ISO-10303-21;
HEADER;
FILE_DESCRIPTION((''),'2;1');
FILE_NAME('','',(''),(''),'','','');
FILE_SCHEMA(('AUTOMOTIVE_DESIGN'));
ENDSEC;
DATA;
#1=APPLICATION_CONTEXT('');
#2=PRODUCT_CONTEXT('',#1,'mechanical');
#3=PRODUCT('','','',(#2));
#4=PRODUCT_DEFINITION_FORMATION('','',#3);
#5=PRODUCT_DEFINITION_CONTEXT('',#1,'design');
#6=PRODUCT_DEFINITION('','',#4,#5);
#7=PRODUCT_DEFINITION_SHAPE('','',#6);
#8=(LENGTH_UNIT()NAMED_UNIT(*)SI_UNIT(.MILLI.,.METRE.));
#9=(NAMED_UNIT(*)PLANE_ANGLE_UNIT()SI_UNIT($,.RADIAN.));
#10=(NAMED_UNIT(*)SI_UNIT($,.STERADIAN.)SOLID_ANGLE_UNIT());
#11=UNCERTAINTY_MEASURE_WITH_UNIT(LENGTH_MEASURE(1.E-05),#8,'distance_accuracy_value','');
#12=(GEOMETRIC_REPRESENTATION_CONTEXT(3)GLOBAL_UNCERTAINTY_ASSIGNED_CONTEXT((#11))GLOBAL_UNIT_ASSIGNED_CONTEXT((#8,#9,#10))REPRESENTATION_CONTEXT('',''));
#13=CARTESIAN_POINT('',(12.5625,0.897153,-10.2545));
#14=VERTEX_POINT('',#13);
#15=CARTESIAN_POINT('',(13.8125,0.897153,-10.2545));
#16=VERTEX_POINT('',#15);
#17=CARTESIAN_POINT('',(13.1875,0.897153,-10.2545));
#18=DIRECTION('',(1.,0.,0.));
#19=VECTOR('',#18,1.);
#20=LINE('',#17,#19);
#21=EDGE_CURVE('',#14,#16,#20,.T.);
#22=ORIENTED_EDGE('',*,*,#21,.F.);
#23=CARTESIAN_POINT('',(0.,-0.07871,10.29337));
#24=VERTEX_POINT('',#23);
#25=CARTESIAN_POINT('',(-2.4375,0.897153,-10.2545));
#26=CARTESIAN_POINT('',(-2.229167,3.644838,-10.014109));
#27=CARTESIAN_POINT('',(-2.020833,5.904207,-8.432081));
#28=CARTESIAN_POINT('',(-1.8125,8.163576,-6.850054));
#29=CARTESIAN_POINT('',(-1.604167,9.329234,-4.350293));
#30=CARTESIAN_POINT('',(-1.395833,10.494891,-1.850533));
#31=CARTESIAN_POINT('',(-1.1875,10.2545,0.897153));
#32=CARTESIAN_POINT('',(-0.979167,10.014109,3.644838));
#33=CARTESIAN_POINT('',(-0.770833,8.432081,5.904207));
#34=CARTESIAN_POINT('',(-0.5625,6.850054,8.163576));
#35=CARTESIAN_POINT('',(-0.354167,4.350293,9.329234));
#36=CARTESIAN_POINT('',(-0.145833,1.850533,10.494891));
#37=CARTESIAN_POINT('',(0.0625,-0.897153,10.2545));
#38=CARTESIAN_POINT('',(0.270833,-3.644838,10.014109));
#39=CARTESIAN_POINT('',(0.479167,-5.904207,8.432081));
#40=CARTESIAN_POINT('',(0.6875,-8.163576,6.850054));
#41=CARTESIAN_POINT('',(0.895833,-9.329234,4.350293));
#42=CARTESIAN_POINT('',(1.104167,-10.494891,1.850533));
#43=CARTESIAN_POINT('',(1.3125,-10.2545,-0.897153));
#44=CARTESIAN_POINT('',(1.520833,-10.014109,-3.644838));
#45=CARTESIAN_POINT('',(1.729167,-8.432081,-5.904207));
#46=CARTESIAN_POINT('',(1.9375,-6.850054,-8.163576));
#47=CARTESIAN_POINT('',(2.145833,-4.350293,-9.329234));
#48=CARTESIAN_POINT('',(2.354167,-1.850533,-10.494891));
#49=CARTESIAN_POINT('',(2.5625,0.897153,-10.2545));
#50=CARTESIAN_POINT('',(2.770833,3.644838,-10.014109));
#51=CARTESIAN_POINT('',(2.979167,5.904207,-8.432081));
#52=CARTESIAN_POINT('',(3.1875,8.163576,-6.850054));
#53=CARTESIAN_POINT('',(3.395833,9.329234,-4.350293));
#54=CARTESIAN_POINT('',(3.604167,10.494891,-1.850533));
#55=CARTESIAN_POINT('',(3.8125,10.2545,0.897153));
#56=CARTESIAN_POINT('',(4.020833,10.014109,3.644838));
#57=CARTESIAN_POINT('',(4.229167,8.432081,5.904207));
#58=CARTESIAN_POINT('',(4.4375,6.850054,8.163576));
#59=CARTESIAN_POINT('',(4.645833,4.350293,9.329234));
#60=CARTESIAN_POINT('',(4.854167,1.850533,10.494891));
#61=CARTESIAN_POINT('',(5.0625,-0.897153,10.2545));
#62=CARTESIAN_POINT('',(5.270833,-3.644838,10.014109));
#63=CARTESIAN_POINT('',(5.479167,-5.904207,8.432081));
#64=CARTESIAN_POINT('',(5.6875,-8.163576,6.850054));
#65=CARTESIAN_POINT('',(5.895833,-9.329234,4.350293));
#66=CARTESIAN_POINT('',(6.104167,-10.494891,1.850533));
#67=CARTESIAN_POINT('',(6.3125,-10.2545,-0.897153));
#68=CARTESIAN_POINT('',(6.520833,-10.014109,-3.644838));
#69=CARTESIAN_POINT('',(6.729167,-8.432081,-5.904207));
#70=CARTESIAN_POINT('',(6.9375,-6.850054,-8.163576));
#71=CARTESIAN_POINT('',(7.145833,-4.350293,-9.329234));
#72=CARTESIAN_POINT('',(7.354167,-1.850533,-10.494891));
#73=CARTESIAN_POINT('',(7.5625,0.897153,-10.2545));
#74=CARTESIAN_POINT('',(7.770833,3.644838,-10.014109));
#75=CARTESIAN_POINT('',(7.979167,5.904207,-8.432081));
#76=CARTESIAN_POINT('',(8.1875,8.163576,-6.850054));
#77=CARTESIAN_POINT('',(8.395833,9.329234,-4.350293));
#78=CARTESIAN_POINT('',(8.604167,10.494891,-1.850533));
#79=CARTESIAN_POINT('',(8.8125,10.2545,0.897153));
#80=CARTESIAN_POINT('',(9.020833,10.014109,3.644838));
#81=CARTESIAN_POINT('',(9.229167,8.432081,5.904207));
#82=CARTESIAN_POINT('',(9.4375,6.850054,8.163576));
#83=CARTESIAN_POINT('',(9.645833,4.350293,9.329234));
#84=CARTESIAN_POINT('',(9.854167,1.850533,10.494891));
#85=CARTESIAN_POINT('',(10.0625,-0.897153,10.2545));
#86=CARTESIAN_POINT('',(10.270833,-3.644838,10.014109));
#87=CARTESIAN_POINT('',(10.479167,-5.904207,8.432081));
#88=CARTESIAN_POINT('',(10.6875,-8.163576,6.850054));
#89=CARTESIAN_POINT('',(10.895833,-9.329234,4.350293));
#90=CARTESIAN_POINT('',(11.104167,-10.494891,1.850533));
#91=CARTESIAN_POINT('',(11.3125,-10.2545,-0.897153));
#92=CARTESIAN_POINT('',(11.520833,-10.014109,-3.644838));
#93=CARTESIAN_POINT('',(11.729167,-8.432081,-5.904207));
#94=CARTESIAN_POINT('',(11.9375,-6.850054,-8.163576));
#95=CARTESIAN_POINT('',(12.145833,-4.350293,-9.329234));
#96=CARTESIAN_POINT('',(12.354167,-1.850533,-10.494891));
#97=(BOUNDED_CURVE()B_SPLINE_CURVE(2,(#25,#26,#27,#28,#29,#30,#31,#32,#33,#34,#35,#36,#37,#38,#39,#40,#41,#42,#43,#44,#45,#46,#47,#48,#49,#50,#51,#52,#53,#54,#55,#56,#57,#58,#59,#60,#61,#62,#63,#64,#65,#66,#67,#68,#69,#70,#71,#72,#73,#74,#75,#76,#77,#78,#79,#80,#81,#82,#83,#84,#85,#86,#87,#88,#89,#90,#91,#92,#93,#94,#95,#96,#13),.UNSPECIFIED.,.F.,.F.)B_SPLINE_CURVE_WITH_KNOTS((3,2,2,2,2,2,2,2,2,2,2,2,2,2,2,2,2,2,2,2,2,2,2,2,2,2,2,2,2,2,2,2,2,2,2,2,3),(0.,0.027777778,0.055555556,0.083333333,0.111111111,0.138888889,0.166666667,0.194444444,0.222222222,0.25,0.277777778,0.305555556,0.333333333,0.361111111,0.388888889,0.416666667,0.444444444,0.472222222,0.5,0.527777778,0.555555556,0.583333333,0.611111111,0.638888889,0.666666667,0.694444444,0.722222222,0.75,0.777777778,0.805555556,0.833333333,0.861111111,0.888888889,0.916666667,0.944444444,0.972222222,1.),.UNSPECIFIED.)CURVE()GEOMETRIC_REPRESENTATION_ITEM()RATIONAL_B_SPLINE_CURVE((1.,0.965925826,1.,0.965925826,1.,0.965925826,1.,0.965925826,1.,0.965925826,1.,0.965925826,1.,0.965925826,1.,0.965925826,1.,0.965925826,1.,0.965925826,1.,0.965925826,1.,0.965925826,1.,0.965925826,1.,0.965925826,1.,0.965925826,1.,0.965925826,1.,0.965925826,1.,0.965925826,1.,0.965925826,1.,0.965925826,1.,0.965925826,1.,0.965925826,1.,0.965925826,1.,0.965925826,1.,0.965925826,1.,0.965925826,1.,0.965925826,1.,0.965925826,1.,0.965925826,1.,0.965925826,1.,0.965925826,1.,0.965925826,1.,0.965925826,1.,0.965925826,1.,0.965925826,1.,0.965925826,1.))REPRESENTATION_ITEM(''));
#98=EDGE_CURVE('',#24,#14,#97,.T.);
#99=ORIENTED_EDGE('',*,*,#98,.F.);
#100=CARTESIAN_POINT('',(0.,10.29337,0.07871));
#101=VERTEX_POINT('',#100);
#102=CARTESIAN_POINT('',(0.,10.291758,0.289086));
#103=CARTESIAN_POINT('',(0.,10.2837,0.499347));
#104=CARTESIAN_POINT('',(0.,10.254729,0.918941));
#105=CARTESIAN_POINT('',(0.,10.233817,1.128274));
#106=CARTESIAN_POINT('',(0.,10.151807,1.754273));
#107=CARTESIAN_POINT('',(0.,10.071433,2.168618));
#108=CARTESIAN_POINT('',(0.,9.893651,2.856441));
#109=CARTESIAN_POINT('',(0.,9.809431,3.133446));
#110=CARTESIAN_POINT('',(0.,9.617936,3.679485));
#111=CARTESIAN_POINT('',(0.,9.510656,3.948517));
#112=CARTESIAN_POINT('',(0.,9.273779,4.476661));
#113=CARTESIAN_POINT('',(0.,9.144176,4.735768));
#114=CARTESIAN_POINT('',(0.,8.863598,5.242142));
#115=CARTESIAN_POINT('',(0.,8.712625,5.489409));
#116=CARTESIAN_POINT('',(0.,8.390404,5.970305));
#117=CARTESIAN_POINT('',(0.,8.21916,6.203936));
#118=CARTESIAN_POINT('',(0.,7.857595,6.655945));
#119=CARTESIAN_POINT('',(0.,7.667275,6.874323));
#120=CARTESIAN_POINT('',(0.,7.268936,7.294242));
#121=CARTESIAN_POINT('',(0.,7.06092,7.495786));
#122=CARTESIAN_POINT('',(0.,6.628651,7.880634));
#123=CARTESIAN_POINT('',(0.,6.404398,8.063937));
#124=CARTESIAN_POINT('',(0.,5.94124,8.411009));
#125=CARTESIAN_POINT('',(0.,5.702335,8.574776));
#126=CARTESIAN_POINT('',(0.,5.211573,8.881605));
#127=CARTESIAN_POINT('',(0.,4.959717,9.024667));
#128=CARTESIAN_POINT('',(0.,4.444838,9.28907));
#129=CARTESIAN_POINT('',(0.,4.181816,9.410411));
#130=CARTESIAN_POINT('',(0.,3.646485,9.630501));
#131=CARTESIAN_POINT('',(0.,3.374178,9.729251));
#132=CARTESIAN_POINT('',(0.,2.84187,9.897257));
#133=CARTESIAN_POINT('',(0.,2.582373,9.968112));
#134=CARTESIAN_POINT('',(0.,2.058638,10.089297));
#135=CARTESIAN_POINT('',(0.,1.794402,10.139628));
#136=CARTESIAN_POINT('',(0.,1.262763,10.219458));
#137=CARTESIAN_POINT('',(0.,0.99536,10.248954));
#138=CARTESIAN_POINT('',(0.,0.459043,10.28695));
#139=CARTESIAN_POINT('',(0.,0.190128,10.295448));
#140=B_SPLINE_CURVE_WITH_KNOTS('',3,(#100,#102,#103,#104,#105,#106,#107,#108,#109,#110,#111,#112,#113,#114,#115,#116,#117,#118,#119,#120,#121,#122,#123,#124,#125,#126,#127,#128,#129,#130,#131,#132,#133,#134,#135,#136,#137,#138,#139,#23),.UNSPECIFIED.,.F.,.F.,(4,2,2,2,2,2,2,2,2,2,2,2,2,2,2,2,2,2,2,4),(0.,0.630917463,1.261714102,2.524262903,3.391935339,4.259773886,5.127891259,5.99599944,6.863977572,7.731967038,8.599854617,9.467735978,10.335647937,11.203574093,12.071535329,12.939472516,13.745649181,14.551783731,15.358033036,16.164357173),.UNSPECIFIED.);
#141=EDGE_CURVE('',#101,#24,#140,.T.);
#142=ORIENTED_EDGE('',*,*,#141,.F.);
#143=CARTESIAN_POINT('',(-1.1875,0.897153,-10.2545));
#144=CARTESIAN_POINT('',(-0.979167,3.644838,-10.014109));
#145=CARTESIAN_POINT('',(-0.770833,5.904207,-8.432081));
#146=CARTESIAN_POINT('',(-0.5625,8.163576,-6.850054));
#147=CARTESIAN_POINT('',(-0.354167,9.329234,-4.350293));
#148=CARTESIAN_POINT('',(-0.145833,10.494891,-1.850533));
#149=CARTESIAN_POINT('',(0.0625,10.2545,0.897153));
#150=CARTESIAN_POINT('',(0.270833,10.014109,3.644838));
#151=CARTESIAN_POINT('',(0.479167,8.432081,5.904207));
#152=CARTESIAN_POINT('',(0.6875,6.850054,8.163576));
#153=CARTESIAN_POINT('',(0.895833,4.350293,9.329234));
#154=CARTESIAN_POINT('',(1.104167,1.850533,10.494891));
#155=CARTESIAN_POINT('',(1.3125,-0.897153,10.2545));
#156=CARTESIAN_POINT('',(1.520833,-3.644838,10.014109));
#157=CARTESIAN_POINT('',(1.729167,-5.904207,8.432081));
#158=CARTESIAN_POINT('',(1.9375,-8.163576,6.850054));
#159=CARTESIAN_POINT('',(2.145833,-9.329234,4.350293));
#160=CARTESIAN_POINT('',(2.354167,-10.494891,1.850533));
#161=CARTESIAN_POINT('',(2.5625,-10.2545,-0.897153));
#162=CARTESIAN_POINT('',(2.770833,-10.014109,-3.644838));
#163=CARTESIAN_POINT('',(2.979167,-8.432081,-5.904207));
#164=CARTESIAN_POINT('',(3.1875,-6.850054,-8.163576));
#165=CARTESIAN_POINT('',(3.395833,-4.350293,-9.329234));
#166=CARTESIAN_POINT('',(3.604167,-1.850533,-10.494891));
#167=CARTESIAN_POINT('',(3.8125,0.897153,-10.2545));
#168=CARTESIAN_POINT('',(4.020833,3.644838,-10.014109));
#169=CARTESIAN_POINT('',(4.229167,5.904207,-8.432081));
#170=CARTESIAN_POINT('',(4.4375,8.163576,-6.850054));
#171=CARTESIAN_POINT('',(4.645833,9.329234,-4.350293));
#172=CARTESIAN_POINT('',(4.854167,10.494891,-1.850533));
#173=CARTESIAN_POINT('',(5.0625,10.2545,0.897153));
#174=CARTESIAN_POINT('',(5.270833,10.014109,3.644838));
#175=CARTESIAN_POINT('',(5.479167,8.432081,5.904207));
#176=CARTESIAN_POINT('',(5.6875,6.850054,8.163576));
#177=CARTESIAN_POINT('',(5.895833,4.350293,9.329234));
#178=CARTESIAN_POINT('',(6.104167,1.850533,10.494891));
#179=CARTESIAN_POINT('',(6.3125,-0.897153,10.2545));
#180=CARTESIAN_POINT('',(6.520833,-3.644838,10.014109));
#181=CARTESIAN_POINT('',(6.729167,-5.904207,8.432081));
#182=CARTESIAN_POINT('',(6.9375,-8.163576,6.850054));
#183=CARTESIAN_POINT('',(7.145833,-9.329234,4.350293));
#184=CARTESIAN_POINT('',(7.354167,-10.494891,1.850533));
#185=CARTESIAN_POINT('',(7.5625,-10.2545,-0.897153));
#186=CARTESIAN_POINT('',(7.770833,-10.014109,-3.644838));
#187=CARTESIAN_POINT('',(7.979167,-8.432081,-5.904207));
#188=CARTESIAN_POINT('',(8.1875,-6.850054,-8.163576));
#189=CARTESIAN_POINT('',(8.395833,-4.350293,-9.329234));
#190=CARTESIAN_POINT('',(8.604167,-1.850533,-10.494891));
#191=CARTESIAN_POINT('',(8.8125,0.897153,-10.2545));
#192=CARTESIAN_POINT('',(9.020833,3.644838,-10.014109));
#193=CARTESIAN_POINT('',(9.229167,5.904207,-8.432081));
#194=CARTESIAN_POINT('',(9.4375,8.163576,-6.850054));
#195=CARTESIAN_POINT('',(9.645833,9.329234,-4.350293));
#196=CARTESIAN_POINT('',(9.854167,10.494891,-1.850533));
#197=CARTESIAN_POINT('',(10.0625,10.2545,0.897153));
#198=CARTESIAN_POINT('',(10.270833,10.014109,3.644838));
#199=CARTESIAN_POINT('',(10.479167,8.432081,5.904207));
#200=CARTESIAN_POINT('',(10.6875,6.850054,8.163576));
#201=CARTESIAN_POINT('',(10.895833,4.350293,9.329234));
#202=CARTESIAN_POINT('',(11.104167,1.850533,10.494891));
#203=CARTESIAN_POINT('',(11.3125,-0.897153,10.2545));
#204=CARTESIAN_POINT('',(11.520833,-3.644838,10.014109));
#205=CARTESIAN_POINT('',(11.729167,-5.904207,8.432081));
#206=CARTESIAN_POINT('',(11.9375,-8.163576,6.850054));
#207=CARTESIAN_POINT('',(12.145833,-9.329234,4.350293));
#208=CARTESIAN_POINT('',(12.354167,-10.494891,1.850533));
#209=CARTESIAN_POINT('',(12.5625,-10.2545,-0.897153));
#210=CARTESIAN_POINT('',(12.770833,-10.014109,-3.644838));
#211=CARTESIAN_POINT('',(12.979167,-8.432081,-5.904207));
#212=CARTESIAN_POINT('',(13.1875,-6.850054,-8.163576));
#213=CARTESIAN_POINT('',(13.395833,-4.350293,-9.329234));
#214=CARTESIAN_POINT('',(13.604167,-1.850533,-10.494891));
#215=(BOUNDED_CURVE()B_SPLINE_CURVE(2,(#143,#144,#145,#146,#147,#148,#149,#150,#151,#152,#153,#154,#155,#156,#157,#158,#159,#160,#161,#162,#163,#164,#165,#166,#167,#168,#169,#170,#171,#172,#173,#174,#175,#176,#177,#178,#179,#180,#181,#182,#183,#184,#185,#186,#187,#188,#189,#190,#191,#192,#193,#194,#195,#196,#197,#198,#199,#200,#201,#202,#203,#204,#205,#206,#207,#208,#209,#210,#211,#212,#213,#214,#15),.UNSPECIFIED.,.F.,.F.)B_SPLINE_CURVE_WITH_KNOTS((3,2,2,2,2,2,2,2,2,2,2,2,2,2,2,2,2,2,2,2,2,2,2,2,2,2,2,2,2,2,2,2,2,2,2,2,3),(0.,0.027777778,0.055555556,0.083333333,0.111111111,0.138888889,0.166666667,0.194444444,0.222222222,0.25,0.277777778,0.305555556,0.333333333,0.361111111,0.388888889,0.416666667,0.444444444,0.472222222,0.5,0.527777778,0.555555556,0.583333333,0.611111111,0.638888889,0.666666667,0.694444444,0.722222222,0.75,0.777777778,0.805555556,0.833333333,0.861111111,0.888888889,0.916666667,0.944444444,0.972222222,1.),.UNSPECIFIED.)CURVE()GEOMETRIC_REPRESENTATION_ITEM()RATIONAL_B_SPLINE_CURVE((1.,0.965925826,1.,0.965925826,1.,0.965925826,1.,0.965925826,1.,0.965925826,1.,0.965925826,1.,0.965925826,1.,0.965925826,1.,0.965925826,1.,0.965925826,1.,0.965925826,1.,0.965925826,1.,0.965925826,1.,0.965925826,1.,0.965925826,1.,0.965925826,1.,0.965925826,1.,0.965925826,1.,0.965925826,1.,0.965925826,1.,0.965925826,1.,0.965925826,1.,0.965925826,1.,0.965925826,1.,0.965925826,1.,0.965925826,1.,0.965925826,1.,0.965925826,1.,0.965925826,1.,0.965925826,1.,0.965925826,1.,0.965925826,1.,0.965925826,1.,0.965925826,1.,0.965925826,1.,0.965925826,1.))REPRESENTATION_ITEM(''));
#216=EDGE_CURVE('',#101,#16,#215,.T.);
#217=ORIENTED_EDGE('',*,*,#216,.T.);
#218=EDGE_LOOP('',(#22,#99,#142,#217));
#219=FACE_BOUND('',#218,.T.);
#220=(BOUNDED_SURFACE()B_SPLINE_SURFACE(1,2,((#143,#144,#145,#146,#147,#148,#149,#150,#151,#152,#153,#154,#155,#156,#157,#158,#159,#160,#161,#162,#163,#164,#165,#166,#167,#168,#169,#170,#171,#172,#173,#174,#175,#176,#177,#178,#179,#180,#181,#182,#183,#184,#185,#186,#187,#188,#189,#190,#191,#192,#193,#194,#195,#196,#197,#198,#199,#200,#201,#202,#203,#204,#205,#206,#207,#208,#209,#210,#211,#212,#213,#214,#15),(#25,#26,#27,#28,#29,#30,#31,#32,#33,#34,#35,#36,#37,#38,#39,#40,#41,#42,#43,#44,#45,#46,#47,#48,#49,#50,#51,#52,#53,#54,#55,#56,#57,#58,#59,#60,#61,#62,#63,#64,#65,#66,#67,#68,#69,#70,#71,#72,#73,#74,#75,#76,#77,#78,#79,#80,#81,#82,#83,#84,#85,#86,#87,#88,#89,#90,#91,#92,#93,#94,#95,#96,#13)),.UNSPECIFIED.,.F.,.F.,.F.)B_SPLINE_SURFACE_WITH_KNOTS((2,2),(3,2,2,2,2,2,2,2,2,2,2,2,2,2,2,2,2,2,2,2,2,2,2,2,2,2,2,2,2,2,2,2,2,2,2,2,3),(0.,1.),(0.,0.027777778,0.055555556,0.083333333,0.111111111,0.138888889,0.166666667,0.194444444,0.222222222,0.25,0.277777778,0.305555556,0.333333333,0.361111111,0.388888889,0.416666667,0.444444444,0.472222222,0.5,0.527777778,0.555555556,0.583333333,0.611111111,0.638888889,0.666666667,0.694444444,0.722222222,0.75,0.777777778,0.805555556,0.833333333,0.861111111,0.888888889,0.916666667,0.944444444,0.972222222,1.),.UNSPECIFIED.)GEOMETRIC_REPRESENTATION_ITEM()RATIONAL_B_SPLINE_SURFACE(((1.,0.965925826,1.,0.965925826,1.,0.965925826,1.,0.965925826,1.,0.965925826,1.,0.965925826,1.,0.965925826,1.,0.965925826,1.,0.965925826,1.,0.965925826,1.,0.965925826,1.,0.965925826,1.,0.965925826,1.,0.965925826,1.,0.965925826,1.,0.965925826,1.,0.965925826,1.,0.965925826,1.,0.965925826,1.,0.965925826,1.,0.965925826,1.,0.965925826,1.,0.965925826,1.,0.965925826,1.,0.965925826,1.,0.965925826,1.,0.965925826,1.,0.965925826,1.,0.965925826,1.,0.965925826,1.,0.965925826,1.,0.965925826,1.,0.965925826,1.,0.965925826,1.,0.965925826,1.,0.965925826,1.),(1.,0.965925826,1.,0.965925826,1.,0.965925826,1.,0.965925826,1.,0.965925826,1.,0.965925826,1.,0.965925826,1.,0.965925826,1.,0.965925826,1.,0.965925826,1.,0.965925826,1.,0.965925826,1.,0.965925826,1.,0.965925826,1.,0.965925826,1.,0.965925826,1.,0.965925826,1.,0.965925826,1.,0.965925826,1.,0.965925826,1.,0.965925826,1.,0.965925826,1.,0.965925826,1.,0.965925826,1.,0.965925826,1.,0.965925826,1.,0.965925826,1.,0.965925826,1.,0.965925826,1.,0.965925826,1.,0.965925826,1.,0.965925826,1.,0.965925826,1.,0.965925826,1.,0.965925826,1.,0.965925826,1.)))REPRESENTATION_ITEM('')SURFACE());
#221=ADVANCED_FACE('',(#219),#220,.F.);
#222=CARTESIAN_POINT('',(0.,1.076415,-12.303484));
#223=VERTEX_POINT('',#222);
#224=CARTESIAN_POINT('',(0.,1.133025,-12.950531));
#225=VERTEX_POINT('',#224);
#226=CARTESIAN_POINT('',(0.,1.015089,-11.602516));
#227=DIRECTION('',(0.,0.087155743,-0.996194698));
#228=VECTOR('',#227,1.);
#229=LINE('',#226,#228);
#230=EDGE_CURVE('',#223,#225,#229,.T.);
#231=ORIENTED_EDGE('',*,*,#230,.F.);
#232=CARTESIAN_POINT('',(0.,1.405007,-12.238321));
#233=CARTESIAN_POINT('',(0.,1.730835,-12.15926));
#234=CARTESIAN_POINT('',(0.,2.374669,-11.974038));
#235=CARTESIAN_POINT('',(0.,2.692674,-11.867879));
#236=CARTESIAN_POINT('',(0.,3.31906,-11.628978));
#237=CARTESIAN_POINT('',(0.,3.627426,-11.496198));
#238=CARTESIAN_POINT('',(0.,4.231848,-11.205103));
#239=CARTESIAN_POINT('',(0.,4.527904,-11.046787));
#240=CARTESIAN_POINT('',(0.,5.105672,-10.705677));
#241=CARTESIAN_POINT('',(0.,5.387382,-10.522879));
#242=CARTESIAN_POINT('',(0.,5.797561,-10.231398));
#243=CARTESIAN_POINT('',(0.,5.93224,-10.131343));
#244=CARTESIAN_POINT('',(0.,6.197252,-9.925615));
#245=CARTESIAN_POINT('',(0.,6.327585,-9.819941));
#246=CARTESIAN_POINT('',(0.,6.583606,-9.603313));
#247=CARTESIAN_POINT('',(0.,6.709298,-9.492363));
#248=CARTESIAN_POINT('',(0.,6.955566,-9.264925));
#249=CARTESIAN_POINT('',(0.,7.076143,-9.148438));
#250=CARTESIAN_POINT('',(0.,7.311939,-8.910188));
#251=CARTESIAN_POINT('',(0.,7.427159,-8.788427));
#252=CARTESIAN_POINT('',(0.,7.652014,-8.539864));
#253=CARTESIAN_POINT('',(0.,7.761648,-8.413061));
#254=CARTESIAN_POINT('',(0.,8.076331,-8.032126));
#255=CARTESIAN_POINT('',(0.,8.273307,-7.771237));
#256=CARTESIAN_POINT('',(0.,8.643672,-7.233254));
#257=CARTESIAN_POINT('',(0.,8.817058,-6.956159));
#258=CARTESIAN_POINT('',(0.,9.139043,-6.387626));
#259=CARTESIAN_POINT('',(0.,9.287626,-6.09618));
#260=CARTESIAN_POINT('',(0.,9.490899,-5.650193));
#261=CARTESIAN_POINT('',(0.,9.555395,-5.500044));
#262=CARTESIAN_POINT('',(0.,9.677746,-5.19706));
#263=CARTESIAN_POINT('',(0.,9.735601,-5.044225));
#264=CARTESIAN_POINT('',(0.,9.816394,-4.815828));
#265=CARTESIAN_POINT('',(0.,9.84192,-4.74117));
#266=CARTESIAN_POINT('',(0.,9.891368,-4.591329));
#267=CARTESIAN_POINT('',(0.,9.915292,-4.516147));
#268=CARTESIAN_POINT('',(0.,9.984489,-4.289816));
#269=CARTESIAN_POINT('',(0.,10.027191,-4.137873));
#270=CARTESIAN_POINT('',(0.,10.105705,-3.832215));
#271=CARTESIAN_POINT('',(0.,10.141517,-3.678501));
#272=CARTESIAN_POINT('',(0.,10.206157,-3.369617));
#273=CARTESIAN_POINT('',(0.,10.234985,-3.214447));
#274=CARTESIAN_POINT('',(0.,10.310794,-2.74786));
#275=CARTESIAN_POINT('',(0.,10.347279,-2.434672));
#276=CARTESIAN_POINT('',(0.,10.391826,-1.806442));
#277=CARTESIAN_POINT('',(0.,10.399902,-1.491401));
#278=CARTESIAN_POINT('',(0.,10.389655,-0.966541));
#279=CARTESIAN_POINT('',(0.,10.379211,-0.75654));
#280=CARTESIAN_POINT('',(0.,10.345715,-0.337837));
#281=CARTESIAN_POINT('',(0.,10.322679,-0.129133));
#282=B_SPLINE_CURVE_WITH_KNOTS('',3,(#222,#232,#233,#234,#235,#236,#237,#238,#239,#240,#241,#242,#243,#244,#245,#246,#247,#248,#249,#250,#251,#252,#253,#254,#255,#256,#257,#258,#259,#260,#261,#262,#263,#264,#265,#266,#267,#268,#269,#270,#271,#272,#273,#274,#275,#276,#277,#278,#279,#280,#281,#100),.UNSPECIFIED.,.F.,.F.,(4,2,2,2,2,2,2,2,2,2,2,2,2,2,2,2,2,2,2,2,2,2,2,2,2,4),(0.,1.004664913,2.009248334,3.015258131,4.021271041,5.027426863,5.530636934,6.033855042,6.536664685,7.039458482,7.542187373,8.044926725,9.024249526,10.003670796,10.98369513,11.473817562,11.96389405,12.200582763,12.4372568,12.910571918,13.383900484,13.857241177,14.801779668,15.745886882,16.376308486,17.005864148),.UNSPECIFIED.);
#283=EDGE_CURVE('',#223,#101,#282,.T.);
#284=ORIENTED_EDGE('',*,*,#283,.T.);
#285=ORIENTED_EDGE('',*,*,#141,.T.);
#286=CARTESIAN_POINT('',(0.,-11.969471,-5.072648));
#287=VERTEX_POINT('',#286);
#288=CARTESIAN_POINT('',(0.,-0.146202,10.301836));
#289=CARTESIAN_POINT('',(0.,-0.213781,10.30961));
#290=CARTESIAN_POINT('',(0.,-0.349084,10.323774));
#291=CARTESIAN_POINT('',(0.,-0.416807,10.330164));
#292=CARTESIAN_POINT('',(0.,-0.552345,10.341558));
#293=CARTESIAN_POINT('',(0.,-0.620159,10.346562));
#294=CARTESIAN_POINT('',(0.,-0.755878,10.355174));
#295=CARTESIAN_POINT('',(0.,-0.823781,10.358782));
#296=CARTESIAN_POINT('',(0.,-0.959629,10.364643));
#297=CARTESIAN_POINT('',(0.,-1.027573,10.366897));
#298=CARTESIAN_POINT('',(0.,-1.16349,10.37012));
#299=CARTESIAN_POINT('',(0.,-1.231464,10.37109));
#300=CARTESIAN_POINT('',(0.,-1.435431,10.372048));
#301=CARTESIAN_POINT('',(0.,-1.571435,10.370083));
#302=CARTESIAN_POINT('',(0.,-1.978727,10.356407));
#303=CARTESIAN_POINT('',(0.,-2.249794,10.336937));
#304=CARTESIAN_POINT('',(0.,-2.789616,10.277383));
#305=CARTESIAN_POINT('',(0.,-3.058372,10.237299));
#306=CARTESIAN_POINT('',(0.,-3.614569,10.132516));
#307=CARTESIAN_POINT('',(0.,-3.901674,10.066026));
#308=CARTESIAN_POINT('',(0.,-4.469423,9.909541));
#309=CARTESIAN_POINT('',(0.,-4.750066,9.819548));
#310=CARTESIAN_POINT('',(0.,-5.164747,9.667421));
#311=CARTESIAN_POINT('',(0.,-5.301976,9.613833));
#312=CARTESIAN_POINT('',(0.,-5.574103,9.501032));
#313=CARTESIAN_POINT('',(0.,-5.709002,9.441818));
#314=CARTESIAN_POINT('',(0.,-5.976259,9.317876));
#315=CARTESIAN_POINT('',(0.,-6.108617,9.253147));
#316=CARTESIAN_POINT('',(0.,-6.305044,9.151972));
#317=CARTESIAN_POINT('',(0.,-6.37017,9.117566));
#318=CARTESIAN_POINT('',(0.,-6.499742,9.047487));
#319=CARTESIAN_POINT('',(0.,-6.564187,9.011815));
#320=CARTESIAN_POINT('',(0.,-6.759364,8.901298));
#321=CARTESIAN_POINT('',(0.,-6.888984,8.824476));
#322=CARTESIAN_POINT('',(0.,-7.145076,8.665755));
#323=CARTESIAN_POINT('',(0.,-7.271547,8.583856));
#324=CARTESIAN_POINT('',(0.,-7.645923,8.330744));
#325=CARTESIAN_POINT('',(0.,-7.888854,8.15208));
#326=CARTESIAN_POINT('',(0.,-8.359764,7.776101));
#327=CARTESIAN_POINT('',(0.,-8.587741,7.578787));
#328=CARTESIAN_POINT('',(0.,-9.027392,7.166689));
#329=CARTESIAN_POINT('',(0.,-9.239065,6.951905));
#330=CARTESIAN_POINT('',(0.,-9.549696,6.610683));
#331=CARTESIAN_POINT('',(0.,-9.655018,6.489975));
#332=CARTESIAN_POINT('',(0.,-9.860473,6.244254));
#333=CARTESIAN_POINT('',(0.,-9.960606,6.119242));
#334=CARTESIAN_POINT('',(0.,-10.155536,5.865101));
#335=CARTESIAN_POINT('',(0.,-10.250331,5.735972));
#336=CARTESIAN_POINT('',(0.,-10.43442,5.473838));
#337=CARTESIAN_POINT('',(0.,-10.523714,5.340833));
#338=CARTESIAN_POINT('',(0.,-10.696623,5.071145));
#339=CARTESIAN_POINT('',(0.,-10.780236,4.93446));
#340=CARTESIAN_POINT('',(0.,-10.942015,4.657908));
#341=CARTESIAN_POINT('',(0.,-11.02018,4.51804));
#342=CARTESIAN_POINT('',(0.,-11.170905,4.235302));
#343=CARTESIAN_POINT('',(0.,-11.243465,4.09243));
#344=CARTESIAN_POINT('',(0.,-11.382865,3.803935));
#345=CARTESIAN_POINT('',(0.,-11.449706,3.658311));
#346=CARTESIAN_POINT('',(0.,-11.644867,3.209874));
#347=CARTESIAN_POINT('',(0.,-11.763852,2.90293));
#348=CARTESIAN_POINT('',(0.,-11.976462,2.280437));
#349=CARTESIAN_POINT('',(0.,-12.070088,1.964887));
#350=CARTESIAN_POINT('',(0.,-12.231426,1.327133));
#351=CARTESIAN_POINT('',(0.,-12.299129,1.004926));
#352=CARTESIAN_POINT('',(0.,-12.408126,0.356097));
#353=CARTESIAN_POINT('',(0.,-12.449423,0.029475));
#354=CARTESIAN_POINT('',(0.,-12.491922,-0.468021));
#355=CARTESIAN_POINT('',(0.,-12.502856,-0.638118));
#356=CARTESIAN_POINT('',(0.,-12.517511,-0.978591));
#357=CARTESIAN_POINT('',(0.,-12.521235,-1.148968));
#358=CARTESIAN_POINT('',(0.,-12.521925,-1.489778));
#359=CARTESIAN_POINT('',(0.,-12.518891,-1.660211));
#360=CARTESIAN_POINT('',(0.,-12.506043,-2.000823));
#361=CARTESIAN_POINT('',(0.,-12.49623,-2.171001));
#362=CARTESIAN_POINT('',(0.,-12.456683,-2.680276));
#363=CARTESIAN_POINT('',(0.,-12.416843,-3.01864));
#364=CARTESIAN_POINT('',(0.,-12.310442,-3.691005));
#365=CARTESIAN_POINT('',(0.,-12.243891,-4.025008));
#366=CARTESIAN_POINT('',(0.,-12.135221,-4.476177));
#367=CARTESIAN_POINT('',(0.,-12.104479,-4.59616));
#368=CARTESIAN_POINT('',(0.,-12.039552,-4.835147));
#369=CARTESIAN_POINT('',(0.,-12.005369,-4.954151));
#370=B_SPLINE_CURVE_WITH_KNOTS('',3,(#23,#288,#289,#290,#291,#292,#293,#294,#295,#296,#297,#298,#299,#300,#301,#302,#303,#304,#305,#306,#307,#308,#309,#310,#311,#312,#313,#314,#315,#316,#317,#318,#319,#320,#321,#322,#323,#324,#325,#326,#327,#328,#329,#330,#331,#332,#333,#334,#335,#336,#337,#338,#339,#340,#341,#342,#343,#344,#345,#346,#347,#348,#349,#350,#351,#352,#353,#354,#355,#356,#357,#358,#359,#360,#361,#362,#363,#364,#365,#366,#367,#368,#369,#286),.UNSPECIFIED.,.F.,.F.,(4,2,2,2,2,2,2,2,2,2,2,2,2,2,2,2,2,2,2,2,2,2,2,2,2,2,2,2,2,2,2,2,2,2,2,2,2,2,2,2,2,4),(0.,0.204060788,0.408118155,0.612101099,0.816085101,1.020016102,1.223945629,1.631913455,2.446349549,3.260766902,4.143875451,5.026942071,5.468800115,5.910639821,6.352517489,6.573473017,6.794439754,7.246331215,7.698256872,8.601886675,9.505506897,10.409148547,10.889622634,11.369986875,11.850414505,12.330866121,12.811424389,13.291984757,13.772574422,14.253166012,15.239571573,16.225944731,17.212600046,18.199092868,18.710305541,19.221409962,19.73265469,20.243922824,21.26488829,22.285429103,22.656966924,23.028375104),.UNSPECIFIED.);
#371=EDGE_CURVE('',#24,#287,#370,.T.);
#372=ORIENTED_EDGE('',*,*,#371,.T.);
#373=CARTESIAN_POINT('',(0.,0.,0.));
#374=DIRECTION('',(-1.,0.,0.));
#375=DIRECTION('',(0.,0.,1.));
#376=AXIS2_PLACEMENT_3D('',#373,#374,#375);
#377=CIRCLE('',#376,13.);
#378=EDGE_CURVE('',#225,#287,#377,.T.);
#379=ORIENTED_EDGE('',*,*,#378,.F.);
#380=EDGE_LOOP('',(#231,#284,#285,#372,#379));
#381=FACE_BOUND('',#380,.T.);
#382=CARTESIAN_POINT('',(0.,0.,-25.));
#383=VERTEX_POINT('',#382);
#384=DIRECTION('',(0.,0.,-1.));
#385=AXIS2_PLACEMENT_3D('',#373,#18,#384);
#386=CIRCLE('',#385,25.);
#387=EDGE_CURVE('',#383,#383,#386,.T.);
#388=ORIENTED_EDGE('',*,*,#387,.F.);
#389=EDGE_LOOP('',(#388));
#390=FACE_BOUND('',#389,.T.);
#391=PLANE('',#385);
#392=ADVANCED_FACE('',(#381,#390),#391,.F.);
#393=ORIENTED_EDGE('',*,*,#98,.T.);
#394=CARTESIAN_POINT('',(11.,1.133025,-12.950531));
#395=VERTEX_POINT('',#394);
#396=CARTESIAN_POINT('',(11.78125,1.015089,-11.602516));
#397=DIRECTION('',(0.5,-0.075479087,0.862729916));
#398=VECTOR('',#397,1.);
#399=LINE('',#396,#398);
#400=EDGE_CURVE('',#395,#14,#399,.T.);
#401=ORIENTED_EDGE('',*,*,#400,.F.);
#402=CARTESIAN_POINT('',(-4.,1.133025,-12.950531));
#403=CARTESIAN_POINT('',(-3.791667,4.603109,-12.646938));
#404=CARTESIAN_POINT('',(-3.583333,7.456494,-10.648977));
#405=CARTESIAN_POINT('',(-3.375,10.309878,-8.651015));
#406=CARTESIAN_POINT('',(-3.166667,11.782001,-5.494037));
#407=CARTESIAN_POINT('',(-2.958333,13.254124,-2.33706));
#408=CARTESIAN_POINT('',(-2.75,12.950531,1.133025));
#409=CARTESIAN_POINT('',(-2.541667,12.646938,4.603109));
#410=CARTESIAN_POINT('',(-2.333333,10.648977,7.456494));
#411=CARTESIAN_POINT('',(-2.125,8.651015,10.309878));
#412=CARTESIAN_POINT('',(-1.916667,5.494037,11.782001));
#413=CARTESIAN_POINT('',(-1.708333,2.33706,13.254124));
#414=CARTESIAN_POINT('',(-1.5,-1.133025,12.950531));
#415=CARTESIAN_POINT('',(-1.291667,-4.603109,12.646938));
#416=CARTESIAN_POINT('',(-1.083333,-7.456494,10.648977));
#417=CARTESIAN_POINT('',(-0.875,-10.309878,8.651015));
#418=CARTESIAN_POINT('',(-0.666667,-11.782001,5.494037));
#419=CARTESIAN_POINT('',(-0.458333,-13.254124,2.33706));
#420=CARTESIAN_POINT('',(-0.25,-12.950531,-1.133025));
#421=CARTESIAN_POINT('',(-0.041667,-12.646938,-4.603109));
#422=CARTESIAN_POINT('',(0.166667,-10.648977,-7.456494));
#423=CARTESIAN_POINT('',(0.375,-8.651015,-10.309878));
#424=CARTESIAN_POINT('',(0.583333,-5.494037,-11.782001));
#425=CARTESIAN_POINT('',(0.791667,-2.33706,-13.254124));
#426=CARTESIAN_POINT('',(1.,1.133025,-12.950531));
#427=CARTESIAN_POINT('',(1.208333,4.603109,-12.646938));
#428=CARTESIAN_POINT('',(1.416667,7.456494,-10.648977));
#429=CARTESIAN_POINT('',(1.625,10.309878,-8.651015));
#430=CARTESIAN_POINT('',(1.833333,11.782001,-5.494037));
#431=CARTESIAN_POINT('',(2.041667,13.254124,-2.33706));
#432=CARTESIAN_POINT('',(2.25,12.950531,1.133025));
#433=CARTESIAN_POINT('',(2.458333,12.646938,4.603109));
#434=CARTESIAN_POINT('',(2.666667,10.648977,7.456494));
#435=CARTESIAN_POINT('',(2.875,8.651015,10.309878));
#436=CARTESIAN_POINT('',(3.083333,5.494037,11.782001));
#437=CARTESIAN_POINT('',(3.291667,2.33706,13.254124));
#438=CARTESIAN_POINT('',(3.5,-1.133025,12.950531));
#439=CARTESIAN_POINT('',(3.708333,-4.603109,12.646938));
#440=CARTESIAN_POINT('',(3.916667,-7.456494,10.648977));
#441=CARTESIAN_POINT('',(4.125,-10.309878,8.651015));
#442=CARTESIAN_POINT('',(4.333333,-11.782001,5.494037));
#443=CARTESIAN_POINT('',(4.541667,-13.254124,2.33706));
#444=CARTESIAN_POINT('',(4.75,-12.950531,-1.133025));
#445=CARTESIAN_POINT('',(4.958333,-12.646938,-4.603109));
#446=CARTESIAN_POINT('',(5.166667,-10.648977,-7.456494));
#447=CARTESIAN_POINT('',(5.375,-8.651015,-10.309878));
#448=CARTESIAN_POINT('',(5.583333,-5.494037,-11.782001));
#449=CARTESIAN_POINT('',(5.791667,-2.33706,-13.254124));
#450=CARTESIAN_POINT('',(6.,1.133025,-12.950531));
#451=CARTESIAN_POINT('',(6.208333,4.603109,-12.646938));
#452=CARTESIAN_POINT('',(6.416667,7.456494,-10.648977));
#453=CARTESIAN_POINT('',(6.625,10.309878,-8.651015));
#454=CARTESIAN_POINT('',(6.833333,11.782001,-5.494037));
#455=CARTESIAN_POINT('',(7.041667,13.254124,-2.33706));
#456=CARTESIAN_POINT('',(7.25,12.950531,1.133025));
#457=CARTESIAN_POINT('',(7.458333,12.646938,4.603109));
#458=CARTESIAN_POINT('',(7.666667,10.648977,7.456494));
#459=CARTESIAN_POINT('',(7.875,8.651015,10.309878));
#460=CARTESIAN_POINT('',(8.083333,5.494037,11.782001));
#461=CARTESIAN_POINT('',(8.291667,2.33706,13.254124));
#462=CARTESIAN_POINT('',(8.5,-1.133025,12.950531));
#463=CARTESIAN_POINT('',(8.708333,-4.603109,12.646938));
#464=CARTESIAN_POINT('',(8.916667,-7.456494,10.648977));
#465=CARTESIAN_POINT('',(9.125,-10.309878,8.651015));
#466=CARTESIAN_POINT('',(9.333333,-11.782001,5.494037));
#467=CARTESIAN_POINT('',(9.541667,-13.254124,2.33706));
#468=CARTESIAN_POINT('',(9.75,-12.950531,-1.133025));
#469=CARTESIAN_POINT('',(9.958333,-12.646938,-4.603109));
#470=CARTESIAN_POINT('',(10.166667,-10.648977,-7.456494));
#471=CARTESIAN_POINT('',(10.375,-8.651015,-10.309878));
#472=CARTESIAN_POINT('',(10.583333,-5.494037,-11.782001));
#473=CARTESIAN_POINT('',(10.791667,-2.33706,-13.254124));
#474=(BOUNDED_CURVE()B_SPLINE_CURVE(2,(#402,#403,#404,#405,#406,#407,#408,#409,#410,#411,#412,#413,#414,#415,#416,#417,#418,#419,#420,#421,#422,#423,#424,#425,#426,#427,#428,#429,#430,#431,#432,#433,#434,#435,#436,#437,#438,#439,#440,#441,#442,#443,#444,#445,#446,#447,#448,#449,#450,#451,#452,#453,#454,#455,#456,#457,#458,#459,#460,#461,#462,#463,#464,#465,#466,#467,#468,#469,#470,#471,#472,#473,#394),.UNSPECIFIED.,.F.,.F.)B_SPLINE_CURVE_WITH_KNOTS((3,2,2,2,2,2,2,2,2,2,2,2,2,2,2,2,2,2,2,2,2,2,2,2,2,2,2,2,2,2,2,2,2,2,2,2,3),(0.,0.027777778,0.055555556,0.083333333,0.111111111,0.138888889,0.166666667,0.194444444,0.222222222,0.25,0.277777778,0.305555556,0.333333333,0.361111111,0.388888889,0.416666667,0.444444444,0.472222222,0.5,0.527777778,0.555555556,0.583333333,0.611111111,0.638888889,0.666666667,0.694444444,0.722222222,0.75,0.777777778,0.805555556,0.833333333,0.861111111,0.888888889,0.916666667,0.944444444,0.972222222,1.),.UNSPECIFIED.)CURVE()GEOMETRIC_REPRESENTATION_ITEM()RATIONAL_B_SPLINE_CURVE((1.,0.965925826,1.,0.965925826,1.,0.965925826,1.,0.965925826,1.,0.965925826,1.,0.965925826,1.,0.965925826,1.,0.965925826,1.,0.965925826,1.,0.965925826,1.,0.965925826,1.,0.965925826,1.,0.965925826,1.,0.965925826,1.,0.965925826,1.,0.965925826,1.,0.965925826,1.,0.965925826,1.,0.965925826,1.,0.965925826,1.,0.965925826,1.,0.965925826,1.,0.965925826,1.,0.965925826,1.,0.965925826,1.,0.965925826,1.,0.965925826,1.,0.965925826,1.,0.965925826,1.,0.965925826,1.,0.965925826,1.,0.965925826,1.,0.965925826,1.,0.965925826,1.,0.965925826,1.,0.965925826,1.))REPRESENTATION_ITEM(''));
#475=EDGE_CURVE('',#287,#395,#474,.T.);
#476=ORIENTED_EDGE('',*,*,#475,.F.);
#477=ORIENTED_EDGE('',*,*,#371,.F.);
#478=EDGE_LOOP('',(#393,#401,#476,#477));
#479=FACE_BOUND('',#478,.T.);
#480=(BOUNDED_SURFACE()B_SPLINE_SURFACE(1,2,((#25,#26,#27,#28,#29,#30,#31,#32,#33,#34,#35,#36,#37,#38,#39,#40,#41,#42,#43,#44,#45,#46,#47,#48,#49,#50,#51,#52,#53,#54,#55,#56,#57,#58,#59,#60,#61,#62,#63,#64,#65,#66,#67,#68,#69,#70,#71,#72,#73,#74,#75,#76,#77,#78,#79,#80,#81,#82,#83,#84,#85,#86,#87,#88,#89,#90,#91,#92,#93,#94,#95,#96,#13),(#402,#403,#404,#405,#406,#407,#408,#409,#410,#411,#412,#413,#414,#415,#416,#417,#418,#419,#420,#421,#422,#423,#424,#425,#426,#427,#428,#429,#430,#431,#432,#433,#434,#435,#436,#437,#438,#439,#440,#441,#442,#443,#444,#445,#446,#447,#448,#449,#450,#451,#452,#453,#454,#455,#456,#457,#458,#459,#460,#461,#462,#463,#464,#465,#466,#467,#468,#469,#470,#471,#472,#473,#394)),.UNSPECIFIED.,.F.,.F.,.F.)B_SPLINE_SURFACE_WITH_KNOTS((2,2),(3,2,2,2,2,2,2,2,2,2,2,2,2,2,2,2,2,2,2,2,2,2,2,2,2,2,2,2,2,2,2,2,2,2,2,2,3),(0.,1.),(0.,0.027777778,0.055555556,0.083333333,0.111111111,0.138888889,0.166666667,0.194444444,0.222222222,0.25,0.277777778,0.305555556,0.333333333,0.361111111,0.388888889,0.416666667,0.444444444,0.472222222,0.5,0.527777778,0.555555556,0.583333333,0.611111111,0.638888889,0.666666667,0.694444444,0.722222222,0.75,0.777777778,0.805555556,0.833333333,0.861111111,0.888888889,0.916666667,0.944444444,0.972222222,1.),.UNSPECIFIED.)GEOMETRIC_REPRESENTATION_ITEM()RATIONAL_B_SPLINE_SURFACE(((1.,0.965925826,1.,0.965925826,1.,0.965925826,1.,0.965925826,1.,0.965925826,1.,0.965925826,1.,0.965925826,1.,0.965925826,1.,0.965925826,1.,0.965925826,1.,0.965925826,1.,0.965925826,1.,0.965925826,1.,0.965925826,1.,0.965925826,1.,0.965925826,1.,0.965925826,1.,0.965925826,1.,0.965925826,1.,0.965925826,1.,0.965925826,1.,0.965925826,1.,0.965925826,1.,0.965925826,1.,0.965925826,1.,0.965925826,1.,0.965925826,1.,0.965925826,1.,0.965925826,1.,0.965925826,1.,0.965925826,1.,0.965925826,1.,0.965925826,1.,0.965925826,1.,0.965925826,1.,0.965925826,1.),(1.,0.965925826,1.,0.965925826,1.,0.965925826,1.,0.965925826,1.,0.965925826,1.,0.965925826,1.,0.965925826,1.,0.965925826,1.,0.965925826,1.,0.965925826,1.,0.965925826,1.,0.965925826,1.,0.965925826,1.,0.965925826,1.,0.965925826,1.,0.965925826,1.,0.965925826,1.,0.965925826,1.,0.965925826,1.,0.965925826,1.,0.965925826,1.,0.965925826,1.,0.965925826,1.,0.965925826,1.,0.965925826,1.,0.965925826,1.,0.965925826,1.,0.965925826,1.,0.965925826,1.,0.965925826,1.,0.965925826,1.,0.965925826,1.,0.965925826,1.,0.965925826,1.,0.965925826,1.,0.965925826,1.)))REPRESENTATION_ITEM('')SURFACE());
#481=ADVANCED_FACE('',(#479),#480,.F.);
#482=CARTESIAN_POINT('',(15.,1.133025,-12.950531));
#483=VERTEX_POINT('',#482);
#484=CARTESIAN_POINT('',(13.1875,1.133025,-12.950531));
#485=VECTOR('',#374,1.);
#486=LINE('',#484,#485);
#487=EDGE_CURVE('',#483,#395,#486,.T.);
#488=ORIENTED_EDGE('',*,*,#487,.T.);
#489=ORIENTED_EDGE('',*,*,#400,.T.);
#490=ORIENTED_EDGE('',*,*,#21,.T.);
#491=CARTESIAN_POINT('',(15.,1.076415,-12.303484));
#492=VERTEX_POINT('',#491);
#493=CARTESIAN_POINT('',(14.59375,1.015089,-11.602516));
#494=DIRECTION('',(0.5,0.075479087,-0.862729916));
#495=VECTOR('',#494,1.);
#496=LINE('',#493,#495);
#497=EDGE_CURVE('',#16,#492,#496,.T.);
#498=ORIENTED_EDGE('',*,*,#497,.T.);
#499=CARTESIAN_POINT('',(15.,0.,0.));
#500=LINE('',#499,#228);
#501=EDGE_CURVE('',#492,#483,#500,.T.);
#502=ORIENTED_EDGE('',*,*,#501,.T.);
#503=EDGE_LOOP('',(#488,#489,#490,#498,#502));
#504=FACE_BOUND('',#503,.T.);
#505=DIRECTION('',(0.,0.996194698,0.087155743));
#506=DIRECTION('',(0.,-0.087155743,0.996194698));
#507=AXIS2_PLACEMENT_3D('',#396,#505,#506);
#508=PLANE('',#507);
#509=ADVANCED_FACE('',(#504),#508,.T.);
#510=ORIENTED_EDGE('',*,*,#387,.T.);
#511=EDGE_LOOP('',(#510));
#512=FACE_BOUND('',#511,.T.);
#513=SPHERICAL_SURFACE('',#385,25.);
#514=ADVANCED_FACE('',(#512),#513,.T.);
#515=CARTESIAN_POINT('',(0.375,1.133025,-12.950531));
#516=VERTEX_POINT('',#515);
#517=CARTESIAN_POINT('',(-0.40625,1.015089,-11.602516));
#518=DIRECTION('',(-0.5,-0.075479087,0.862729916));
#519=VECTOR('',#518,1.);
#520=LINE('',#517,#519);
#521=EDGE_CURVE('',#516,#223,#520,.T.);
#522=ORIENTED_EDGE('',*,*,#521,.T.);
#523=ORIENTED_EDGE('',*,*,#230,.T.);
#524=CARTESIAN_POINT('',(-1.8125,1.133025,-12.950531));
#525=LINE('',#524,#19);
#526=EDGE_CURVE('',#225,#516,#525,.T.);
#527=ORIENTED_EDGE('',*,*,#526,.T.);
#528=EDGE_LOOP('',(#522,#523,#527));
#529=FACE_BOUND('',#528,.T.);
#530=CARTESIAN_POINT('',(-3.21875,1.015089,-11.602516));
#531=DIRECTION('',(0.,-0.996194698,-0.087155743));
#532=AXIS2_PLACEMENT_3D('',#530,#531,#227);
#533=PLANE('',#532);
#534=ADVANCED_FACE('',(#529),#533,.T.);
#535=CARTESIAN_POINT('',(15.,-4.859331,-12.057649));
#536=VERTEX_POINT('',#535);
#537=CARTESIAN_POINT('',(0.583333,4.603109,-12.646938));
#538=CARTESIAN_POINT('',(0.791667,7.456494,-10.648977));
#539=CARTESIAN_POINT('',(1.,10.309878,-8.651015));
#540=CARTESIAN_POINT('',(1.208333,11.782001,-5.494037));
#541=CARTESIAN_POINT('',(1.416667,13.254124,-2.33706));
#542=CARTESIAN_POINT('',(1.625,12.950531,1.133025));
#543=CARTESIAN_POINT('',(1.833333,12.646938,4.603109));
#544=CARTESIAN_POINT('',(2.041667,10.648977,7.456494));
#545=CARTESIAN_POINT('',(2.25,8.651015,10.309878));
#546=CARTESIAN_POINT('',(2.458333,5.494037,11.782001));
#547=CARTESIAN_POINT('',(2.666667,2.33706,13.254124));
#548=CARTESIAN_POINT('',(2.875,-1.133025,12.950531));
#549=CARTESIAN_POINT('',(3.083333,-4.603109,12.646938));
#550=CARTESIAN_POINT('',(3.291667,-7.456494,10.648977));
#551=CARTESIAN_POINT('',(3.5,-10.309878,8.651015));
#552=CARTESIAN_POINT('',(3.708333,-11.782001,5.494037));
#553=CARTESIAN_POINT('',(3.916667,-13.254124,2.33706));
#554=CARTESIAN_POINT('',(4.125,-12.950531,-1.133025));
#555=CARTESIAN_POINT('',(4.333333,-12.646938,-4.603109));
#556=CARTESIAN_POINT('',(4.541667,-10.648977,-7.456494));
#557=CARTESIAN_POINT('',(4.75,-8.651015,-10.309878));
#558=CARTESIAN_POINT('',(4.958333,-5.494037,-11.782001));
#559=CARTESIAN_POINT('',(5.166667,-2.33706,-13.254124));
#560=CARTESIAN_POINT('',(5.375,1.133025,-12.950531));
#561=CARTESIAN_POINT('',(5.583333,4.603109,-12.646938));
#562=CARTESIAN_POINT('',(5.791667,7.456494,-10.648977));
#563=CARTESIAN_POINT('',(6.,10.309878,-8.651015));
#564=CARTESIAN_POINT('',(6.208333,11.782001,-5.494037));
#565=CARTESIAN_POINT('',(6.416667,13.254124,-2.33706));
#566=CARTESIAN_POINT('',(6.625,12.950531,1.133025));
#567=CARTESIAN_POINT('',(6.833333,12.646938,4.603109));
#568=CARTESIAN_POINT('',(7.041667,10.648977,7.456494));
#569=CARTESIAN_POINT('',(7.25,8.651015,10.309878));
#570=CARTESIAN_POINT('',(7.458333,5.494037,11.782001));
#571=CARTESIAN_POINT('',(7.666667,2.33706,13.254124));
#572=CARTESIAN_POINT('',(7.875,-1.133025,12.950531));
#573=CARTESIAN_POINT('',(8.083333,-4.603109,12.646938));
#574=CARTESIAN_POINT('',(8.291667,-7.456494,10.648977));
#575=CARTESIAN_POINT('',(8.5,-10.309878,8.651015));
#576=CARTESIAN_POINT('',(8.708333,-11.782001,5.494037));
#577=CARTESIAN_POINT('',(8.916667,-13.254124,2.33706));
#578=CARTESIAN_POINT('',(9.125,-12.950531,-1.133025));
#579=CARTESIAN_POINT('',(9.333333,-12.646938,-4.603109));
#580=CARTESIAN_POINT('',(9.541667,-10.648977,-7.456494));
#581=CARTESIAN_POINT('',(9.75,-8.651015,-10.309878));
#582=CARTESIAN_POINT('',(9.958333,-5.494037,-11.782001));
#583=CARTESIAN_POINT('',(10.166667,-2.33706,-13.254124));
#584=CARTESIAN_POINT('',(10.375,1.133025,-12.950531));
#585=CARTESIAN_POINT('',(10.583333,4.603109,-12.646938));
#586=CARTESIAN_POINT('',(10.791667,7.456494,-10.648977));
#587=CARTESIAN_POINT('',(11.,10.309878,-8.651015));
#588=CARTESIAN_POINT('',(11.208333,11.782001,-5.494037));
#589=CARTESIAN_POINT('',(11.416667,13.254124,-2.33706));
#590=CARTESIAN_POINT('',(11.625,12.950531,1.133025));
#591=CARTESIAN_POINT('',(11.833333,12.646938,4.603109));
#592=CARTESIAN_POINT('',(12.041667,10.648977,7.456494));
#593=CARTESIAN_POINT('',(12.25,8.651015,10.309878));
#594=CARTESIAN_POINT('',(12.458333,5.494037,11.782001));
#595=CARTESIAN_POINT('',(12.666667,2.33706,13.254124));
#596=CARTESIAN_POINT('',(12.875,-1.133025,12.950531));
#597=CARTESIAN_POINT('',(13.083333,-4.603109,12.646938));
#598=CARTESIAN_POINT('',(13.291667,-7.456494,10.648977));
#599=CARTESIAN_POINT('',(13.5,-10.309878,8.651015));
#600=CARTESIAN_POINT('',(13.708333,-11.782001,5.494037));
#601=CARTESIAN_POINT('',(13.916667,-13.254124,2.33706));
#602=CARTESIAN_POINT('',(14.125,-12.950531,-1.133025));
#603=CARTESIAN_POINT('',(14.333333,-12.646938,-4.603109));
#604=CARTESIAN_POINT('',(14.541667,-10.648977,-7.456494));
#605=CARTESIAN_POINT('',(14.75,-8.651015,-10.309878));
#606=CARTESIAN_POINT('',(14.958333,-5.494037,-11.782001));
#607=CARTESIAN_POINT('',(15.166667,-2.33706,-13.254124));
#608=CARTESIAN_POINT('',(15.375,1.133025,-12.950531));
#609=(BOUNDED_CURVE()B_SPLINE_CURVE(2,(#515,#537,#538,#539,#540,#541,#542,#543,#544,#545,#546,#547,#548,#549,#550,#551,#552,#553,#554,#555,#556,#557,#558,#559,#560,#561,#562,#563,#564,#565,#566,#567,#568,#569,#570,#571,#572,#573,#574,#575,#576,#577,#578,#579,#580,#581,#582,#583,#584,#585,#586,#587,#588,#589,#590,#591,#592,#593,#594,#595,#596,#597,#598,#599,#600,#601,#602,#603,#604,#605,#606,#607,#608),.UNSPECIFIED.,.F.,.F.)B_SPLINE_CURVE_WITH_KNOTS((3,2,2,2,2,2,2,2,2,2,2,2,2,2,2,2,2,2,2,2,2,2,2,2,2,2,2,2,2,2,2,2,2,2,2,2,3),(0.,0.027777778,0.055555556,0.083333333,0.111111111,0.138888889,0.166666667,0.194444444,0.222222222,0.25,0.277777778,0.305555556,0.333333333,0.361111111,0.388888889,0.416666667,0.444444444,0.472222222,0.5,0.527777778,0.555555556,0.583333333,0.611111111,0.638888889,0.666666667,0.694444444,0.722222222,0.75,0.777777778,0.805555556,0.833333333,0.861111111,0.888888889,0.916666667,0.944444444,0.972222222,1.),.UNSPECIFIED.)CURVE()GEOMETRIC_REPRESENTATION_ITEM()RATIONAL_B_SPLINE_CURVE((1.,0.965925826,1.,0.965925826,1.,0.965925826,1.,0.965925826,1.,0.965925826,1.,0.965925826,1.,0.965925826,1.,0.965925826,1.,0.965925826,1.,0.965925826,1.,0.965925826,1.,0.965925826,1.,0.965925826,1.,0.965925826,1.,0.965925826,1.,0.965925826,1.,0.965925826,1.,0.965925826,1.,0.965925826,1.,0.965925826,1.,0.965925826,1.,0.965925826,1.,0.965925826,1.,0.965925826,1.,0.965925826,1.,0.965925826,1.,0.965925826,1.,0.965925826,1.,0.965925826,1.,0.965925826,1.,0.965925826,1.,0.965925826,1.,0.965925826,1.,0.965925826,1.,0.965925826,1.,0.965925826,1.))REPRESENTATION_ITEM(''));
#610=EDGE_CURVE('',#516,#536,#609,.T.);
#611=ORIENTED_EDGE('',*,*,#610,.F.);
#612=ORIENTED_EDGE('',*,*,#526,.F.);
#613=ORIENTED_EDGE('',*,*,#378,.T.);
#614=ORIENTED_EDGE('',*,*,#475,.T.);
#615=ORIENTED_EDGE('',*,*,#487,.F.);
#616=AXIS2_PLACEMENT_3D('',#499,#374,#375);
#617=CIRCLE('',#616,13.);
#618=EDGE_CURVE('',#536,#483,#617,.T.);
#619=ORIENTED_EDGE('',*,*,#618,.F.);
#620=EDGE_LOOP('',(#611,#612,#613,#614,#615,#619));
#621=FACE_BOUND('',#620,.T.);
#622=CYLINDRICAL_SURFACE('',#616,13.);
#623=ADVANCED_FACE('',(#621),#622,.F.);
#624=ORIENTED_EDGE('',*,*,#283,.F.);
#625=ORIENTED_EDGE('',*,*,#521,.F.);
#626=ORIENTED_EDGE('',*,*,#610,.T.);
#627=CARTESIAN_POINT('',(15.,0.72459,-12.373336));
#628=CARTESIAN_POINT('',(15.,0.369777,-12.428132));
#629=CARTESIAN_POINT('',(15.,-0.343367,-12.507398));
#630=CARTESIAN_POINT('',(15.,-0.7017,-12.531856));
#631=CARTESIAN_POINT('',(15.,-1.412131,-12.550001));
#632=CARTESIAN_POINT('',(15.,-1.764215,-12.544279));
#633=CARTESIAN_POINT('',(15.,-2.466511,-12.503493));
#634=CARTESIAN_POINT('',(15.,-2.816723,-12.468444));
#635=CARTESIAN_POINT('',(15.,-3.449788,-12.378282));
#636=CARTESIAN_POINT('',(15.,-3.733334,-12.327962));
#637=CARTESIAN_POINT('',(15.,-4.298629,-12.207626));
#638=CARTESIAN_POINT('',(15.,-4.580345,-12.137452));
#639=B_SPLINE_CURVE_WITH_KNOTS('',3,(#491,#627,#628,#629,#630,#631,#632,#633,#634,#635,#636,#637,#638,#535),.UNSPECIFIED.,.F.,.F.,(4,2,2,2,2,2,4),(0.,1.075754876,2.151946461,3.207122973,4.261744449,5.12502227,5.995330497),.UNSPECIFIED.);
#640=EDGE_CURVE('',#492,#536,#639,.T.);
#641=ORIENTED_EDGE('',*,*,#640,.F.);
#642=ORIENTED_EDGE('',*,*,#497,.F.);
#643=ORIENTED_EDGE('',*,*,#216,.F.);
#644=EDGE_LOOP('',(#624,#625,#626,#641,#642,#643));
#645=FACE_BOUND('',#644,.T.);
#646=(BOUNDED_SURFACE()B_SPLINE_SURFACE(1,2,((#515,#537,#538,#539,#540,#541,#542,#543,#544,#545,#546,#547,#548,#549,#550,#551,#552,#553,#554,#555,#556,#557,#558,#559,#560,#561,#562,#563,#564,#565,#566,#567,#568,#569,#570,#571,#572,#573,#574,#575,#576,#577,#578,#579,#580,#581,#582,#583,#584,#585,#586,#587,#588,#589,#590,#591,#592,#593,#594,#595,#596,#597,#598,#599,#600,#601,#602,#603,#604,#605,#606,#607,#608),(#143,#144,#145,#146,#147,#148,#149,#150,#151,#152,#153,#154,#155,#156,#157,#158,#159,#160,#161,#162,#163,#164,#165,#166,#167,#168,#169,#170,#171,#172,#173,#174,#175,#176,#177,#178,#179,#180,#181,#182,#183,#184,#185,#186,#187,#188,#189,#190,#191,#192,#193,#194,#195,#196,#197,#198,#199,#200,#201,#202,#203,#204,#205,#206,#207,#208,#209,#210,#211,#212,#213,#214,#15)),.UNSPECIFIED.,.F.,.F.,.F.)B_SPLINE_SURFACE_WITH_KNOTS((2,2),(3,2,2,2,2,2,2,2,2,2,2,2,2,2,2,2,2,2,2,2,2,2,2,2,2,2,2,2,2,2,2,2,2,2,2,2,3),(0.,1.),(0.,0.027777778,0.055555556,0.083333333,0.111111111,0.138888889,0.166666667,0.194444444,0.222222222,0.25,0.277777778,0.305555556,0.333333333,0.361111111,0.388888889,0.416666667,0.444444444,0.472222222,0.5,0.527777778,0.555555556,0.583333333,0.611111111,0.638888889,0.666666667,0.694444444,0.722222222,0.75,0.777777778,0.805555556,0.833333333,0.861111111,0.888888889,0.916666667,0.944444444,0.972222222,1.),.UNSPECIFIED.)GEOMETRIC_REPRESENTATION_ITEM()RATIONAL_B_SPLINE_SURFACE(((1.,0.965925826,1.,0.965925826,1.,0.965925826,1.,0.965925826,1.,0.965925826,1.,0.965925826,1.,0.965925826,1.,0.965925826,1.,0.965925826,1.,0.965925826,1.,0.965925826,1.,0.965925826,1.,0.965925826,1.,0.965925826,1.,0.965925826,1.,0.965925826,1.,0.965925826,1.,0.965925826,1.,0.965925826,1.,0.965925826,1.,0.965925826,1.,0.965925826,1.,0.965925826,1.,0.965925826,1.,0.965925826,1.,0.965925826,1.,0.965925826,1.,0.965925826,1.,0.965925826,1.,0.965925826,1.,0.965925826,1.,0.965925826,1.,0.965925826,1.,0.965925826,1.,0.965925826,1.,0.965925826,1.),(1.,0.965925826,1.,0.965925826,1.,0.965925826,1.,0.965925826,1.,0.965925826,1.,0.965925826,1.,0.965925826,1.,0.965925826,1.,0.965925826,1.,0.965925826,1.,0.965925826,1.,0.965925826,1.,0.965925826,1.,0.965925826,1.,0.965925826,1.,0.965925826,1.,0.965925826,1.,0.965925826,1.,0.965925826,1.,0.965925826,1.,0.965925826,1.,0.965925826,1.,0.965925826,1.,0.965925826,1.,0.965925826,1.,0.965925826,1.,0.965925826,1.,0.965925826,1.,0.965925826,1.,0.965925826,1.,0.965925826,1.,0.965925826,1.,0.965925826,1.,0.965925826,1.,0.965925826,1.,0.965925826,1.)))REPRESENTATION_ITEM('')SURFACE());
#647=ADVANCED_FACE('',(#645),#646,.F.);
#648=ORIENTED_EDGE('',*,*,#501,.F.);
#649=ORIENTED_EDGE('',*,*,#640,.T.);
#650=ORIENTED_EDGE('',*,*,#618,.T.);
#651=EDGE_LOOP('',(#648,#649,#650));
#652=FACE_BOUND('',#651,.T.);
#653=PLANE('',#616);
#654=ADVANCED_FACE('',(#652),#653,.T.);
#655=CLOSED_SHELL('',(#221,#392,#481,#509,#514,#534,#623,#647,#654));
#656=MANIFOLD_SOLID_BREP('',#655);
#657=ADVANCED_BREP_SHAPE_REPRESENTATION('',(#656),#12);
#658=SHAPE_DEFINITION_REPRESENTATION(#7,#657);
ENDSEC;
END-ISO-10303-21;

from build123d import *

# Parameters (mm, degrees)
SKETCH2_R           = 25
BOSS_EXTRUDE1_DEPTH = 25
FILLET1_R           = 25
SKETCH3_R           = 13
CUT_EXTRUDE1_DEPTH  = 15
THREAD2_PITCH       = 5
SKETCH17_W          = 32.265191549
SKETCH17_H          = 31.135556834
CUT_EXTRUDE2_DEPTH  = 70


with BuildPart() as part:
    # Sketch2 → Boss-Extrude1 (new body)
    with BuildSketch(Plane(origin=(0, 0, 0), x_dir=(0, 0, -1), z_dir=(1, 0, 0))):
        Circle(SKETCH2_R)
    extrude(amount=BOSS_EXTRUDE1_DEPTH)

    # Fillet1
    fillet1_edges = [part.edges().sort_by_distance(p)[0] for p in [
        (25, 0, 25),
    ]]
    fillet(fillet1_edges, radius=FILLET1_R - 0.0001)  # a hair under: the kernel refuses the full size

    # Sketch3 → Cut-Extrude1 (cut)
    with BuildSketch(Plane.ZY):
        Circle(SKETCH3_R)
    extrude(amount=-CUT_EXTRUDE1_DEPTH, mode=Mode.SUBTRACT)

    # Thread2: the profile of Thread Profile3 profile screwed along a right-hand helix of 3 turns, 12 arcs to a turn; built about Z, then put on its axis
    thread2_z = Axis((0, 0, 0), (0, 0, 1))
    thread2_corners = [(13.0003, -3e-09, -0.000173205), (13.0003, -3e-09, 4.375173191), (10.293670625, -3e-09, 2.812499993), (10.293670625, -3e-09, 1.562499993)]
    with BuildLine(mode=Mode.PRIVATE) as thread2_profile:
        Line(thread2_corners[0], thread2_corners[1])
        Line(thread2_corners[1], thread2_corners[2])
        Line(thread2_corners[2], thread2_corners[3])
        Line(thread2_corners[3], thread2_corners[0])
    thread2_cap = Face(thread2_profile.wire())
    thread2_turn_angles = [0, 15, 30, 45, 60, 75, 90, 105, 120, 135, 150, 165, 180, 195, 210, 225, 240, 255, 270, 285, 300, 315, 330, 345, 360]
    thread2_turn_weights = [1, 0.9659258262890683, 1, 0.9659258262890683, 1, 0.9659258262890683, 1, 0.9659258262890683, 1, 0.9659258262890683, 1, 0.9659258262890683, 1, 0.9659258262890683, 1, 0.9659258262890683, 1, 0.9659258262890683, 1, 0.9659258262890683, 1, 0.9659258262890683, 1, 0.9659258262890683, 1]
    thread2_turn_rails = [Edge.make_bspline([Vector(p[0], p[1], 0).rotate(thread2_z, thread2_turn_angles[k]) / thread2_turn_weights[k] + Vector(0, 0, p[2] + THREAD2_PITCH * thread2_turn_angles[k] / 360) for k in range(25)], [0, 0, 0, 1, 1, 2, 2, 3, 3, 4, 4, 5, 5, 6, 6, 7, 7, 8, 8, 9, 9, 10, 10, 11, 11, 12, 12, 12], 2, thread2_turn_weights) for p in thread2_corners]
    thread2_turn_sides = [Face.make_surface_from_curves(thread2_turn_rails[p[0]], thread2_turn_rails[p[1]]) for p in [(0, 1), (1, 2), (2, 3), (3, 0)]]
    thread2 = Plane(origin=(-4, 0, 0), x_dir=(0, 0.087155743, -0.996194698), z_dir=(1, 0, 0)) * Solid(Shell([*[p.moved(Location((0, 0, THREAD2_PITCH * i))) for i in range(3) for p in thread2_turn_sides], thread2_cap, thread2_cap.rotate(thread2_z, 1080).moved(Location((0, 0, THREAD2_PITCH * 1080 / 360)))]))
    add(thread2)

    # Sketch17 → Cut-Extrude2 (cut)
    with BuildSketch(Plane.ZY):
        with Locations((0.529516272, -0.282408679)):
            Rectangle(SKETCH17_W, SKETCH17_H)
    extrude(amount=CUT_EXTRUDE2_DEPTH, mode=Mode.SUBTRACT)


solid = part.part
